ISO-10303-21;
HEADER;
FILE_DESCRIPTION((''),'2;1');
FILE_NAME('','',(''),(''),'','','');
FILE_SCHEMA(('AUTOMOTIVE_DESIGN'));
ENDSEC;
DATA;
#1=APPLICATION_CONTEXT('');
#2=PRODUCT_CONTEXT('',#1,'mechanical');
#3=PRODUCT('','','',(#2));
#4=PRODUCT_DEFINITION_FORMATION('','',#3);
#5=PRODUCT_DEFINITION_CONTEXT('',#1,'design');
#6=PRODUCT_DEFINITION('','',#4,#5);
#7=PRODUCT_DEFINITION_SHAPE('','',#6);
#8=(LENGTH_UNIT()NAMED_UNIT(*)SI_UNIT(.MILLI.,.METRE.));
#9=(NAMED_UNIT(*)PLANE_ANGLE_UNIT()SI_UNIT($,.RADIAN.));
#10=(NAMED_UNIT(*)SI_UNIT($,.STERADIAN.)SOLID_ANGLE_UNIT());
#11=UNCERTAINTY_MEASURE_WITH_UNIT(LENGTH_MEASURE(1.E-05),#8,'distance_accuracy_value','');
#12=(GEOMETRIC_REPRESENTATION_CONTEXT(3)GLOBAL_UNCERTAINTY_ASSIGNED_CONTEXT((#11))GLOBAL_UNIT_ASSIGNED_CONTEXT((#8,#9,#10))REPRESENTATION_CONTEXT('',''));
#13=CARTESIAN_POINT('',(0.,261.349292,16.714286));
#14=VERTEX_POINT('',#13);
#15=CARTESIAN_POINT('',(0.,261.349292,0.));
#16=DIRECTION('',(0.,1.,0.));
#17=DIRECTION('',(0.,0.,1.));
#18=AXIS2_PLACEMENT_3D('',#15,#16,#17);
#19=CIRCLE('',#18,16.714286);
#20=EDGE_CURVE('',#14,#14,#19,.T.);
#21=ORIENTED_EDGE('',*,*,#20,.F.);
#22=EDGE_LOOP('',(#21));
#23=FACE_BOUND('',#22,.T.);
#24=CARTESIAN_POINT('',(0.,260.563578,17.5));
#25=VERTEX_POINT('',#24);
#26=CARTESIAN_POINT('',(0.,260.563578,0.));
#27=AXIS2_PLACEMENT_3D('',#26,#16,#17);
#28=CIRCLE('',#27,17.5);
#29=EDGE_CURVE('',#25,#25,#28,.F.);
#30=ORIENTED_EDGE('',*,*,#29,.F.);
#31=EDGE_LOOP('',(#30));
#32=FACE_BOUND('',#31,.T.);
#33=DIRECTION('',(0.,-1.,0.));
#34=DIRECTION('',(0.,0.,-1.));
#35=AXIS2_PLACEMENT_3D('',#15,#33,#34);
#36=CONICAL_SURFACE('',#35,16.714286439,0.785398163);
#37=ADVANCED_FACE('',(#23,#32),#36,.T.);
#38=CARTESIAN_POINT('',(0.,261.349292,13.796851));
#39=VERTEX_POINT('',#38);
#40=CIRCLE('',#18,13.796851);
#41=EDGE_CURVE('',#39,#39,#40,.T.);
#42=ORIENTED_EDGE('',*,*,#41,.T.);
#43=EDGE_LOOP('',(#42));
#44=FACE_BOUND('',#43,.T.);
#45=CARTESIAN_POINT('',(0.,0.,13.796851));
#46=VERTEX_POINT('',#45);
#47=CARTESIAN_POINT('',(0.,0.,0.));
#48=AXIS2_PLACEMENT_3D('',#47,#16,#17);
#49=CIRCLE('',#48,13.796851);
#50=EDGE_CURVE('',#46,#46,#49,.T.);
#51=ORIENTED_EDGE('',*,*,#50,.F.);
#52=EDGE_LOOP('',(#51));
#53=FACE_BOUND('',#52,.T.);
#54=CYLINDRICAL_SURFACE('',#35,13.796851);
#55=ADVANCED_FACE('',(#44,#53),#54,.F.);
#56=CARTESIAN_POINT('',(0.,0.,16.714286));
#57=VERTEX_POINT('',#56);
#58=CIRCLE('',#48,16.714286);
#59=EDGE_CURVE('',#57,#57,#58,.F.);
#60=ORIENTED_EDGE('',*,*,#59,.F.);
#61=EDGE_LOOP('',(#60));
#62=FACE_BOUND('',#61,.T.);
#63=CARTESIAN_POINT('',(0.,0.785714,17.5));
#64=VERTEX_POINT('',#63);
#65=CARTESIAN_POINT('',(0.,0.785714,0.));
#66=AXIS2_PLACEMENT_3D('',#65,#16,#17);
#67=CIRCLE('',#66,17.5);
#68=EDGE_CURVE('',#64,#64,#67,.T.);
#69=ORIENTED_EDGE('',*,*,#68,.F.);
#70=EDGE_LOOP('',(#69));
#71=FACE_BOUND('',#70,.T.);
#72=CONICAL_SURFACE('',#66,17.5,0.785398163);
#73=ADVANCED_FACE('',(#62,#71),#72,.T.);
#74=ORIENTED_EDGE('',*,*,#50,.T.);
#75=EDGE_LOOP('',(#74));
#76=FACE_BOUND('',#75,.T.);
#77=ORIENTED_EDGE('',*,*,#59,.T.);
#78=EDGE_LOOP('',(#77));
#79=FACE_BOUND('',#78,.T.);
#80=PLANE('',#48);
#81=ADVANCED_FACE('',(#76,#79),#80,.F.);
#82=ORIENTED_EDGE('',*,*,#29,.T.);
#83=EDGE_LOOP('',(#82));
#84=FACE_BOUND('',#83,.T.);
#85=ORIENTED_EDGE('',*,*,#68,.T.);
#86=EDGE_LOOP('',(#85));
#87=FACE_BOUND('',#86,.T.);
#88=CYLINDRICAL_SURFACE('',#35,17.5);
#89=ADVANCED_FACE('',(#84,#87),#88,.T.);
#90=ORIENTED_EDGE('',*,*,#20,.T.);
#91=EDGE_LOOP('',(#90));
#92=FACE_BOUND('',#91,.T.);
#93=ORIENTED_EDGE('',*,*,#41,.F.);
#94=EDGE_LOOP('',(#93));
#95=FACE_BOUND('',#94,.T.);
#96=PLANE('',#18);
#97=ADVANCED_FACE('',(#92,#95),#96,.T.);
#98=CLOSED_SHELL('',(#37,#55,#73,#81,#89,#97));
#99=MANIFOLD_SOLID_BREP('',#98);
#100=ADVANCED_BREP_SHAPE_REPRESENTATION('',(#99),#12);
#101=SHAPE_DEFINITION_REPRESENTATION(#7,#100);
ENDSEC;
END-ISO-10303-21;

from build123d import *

# Parameters (mm, degrees)
SKETCH1_R           = 17.5
BOSS_EXTRUDE1_DEPTH = 261.349292026
SKETCH2_R           = 13.796851261
CUT_EXTRUDE1_DEPTH  = 263.518480192
CHAMFER1_SIZE       = 0.785713561


with BuildPart() as part:
    # Sketch1 → Boss-Extrude1 (new body)
    with BuildSketch(Plane(origin=(0, 0, 0), x_dir=(1, 0, 0), z_dir=(0, 1, 0))):
        Circle(SKETCH1_R)
    extrude(amount=BOSS_EXTRUDE1_DEPTH)

    # Sketch2 → Cut-Extrude1 (cut, through all)
    with BuildSketch(Plane(origin=(0, 0, 0), x_dir=(1, 0, 0), z_dir=(0, 1, 0))):
        Circle(SKETCH2_R)
    extrude(amount=CUT_EXTRUDE1_DEPTH, mode=Mode.SUBTRACT)

    # Chamfer1
    chamfer1_edges = [part.edges().sort_by_distance(p)[0] for p in [
        (-17.5, 261.349292026, 0),
        (-17.5, 0, 0),
    ]]
    chamfer(chamfer1_edges, length=CHAMFER1_SIZE)


solid = part.part
